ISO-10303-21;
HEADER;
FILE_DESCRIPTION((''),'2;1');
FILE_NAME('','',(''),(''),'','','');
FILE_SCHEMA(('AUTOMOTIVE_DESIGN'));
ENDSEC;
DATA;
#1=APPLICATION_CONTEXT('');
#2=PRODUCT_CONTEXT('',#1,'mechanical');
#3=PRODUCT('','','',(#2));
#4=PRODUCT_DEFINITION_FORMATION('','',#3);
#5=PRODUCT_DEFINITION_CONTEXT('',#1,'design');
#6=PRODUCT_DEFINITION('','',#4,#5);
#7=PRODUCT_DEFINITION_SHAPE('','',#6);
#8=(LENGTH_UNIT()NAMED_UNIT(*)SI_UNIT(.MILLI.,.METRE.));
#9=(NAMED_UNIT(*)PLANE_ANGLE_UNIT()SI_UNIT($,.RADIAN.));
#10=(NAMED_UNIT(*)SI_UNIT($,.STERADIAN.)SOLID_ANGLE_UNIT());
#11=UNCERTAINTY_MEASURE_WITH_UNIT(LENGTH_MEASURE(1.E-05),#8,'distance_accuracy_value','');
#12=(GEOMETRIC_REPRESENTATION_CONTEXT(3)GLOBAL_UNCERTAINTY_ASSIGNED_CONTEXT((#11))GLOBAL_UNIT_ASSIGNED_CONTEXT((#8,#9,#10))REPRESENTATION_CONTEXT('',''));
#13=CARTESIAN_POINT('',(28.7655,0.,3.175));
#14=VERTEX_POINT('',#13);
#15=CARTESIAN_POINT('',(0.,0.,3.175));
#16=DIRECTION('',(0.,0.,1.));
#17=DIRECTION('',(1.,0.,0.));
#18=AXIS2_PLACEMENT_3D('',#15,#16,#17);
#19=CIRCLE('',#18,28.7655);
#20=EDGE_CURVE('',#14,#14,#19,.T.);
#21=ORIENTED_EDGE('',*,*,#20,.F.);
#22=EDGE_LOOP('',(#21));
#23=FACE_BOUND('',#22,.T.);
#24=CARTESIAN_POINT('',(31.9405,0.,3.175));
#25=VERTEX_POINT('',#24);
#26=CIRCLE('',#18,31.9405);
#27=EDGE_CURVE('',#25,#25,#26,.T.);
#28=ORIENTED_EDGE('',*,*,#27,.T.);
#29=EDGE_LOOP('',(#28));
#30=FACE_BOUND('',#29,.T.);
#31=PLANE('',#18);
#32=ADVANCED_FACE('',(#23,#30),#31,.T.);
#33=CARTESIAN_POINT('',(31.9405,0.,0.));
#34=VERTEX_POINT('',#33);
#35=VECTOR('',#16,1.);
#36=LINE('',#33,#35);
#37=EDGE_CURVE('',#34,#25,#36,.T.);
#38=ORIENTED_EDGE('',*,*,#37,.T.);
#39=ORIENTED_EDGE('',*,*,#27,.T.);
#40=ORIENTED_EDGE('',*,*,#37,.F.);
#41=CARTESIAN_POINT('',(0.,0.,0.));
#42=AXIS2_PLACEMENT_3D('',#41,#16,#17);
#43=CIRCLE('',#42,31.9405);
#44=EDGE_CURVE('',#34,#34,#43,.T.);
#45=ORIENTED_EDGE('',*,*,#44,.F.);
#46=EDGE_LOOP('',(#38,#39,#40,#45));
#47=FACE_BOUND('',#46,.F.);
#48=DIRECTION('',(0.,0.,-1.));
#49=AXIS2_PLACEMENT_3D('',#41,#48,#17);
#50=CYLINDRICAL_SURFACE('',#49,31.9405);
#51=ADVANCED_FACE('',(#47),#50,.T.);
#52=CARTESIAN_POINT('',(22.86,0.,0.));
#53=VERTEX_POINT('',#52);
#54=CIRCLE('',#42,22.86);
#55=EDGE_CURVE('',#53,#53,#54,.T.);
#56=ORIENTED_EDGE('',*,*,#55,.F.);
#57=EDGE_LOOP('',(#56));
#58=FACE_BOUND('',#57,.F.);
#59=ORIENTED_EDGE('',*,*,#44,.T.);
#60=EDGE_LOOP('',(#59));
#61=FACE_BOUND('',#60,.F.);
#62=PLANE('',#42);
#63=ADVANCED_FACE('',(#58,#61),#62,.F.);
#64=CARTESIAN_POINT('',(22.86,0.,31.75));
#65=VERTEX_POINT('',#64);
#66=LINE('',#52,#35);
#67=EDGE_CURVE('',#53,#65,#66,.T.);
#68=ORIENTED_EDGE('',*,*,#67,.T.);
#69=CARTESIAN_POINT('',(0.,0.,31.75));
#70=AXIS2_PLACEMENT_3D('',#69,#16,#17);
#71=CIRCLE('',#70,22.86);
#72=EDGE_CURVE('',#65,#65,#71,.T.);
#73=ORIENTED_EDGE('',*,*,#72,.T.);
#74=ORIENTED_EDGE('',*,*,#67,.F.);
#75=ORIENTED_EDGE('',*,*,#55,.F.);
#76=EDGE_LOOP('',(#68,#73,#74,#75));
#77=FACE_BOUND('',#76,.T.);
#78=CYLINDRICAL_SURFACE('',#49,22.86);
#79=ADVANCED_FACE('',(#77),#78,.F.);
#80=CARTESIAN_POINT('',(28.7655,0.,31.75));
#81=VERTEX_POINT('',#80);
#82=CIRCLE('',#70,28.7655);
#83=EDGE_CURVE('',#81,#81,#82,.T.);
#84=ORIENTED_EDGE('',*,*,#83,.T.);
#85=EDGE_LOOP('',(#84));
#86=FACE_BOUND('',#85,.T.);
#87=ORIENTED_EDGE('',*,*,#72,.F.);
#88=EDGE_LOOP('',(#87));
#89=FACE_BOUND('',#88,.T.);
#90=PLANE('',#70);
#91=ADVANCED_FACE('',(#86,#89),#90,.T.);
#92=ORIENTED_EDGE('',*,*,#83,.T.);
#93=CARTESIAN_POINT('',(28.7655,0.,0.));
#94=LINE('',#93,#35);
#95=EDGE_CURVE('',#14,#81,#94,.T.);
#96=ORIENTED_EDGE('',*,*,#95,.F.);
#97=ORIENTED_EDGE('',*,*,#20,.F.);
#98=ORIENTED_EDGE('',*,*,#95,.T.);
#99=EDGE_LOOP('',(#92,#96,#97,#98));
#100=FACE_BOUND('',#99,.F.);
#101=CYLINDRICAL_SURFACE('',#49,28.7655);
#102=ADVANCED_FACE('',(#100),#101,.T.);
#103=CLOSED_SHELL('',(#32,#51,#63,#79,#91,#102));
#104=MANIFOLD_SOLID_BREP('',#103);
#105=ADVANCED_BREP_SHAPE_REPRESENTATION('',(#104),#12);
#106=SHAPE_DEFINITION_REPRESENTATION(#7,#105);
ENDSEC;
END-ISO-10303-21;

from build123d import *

# Parameters (mm, degrees)
F1_R     = 31.9405
F1_R_2   = 28.7655
F2_DEPTH = 3.175
F1_R_3   = 22.86
F3_DEPTH = 31.75


# Not quite as in the source:
# - a variable given as a bare number and used for a length is read in inches; the dataset says mm whatever the document's units were


with BuildPart() as f2:
    # F1 (on Top) → F2 (new body)
    with BuildSketch(Plane.XY):
        Circle(F1_R)
        Circle(F1_R_2, mode=Mode.SUBTRACT)
    extrude(amount=F2_DEPTH)

    # F1 (on Top) → F3 (join)
    with BuildSketch(Plane.XY):
        Circle(F1_R_2)
        Circle(F1_R_3, mode=Mode.SUBTRACT)
    extrude(amount=F3_DEPTH)


solid = f2.part
